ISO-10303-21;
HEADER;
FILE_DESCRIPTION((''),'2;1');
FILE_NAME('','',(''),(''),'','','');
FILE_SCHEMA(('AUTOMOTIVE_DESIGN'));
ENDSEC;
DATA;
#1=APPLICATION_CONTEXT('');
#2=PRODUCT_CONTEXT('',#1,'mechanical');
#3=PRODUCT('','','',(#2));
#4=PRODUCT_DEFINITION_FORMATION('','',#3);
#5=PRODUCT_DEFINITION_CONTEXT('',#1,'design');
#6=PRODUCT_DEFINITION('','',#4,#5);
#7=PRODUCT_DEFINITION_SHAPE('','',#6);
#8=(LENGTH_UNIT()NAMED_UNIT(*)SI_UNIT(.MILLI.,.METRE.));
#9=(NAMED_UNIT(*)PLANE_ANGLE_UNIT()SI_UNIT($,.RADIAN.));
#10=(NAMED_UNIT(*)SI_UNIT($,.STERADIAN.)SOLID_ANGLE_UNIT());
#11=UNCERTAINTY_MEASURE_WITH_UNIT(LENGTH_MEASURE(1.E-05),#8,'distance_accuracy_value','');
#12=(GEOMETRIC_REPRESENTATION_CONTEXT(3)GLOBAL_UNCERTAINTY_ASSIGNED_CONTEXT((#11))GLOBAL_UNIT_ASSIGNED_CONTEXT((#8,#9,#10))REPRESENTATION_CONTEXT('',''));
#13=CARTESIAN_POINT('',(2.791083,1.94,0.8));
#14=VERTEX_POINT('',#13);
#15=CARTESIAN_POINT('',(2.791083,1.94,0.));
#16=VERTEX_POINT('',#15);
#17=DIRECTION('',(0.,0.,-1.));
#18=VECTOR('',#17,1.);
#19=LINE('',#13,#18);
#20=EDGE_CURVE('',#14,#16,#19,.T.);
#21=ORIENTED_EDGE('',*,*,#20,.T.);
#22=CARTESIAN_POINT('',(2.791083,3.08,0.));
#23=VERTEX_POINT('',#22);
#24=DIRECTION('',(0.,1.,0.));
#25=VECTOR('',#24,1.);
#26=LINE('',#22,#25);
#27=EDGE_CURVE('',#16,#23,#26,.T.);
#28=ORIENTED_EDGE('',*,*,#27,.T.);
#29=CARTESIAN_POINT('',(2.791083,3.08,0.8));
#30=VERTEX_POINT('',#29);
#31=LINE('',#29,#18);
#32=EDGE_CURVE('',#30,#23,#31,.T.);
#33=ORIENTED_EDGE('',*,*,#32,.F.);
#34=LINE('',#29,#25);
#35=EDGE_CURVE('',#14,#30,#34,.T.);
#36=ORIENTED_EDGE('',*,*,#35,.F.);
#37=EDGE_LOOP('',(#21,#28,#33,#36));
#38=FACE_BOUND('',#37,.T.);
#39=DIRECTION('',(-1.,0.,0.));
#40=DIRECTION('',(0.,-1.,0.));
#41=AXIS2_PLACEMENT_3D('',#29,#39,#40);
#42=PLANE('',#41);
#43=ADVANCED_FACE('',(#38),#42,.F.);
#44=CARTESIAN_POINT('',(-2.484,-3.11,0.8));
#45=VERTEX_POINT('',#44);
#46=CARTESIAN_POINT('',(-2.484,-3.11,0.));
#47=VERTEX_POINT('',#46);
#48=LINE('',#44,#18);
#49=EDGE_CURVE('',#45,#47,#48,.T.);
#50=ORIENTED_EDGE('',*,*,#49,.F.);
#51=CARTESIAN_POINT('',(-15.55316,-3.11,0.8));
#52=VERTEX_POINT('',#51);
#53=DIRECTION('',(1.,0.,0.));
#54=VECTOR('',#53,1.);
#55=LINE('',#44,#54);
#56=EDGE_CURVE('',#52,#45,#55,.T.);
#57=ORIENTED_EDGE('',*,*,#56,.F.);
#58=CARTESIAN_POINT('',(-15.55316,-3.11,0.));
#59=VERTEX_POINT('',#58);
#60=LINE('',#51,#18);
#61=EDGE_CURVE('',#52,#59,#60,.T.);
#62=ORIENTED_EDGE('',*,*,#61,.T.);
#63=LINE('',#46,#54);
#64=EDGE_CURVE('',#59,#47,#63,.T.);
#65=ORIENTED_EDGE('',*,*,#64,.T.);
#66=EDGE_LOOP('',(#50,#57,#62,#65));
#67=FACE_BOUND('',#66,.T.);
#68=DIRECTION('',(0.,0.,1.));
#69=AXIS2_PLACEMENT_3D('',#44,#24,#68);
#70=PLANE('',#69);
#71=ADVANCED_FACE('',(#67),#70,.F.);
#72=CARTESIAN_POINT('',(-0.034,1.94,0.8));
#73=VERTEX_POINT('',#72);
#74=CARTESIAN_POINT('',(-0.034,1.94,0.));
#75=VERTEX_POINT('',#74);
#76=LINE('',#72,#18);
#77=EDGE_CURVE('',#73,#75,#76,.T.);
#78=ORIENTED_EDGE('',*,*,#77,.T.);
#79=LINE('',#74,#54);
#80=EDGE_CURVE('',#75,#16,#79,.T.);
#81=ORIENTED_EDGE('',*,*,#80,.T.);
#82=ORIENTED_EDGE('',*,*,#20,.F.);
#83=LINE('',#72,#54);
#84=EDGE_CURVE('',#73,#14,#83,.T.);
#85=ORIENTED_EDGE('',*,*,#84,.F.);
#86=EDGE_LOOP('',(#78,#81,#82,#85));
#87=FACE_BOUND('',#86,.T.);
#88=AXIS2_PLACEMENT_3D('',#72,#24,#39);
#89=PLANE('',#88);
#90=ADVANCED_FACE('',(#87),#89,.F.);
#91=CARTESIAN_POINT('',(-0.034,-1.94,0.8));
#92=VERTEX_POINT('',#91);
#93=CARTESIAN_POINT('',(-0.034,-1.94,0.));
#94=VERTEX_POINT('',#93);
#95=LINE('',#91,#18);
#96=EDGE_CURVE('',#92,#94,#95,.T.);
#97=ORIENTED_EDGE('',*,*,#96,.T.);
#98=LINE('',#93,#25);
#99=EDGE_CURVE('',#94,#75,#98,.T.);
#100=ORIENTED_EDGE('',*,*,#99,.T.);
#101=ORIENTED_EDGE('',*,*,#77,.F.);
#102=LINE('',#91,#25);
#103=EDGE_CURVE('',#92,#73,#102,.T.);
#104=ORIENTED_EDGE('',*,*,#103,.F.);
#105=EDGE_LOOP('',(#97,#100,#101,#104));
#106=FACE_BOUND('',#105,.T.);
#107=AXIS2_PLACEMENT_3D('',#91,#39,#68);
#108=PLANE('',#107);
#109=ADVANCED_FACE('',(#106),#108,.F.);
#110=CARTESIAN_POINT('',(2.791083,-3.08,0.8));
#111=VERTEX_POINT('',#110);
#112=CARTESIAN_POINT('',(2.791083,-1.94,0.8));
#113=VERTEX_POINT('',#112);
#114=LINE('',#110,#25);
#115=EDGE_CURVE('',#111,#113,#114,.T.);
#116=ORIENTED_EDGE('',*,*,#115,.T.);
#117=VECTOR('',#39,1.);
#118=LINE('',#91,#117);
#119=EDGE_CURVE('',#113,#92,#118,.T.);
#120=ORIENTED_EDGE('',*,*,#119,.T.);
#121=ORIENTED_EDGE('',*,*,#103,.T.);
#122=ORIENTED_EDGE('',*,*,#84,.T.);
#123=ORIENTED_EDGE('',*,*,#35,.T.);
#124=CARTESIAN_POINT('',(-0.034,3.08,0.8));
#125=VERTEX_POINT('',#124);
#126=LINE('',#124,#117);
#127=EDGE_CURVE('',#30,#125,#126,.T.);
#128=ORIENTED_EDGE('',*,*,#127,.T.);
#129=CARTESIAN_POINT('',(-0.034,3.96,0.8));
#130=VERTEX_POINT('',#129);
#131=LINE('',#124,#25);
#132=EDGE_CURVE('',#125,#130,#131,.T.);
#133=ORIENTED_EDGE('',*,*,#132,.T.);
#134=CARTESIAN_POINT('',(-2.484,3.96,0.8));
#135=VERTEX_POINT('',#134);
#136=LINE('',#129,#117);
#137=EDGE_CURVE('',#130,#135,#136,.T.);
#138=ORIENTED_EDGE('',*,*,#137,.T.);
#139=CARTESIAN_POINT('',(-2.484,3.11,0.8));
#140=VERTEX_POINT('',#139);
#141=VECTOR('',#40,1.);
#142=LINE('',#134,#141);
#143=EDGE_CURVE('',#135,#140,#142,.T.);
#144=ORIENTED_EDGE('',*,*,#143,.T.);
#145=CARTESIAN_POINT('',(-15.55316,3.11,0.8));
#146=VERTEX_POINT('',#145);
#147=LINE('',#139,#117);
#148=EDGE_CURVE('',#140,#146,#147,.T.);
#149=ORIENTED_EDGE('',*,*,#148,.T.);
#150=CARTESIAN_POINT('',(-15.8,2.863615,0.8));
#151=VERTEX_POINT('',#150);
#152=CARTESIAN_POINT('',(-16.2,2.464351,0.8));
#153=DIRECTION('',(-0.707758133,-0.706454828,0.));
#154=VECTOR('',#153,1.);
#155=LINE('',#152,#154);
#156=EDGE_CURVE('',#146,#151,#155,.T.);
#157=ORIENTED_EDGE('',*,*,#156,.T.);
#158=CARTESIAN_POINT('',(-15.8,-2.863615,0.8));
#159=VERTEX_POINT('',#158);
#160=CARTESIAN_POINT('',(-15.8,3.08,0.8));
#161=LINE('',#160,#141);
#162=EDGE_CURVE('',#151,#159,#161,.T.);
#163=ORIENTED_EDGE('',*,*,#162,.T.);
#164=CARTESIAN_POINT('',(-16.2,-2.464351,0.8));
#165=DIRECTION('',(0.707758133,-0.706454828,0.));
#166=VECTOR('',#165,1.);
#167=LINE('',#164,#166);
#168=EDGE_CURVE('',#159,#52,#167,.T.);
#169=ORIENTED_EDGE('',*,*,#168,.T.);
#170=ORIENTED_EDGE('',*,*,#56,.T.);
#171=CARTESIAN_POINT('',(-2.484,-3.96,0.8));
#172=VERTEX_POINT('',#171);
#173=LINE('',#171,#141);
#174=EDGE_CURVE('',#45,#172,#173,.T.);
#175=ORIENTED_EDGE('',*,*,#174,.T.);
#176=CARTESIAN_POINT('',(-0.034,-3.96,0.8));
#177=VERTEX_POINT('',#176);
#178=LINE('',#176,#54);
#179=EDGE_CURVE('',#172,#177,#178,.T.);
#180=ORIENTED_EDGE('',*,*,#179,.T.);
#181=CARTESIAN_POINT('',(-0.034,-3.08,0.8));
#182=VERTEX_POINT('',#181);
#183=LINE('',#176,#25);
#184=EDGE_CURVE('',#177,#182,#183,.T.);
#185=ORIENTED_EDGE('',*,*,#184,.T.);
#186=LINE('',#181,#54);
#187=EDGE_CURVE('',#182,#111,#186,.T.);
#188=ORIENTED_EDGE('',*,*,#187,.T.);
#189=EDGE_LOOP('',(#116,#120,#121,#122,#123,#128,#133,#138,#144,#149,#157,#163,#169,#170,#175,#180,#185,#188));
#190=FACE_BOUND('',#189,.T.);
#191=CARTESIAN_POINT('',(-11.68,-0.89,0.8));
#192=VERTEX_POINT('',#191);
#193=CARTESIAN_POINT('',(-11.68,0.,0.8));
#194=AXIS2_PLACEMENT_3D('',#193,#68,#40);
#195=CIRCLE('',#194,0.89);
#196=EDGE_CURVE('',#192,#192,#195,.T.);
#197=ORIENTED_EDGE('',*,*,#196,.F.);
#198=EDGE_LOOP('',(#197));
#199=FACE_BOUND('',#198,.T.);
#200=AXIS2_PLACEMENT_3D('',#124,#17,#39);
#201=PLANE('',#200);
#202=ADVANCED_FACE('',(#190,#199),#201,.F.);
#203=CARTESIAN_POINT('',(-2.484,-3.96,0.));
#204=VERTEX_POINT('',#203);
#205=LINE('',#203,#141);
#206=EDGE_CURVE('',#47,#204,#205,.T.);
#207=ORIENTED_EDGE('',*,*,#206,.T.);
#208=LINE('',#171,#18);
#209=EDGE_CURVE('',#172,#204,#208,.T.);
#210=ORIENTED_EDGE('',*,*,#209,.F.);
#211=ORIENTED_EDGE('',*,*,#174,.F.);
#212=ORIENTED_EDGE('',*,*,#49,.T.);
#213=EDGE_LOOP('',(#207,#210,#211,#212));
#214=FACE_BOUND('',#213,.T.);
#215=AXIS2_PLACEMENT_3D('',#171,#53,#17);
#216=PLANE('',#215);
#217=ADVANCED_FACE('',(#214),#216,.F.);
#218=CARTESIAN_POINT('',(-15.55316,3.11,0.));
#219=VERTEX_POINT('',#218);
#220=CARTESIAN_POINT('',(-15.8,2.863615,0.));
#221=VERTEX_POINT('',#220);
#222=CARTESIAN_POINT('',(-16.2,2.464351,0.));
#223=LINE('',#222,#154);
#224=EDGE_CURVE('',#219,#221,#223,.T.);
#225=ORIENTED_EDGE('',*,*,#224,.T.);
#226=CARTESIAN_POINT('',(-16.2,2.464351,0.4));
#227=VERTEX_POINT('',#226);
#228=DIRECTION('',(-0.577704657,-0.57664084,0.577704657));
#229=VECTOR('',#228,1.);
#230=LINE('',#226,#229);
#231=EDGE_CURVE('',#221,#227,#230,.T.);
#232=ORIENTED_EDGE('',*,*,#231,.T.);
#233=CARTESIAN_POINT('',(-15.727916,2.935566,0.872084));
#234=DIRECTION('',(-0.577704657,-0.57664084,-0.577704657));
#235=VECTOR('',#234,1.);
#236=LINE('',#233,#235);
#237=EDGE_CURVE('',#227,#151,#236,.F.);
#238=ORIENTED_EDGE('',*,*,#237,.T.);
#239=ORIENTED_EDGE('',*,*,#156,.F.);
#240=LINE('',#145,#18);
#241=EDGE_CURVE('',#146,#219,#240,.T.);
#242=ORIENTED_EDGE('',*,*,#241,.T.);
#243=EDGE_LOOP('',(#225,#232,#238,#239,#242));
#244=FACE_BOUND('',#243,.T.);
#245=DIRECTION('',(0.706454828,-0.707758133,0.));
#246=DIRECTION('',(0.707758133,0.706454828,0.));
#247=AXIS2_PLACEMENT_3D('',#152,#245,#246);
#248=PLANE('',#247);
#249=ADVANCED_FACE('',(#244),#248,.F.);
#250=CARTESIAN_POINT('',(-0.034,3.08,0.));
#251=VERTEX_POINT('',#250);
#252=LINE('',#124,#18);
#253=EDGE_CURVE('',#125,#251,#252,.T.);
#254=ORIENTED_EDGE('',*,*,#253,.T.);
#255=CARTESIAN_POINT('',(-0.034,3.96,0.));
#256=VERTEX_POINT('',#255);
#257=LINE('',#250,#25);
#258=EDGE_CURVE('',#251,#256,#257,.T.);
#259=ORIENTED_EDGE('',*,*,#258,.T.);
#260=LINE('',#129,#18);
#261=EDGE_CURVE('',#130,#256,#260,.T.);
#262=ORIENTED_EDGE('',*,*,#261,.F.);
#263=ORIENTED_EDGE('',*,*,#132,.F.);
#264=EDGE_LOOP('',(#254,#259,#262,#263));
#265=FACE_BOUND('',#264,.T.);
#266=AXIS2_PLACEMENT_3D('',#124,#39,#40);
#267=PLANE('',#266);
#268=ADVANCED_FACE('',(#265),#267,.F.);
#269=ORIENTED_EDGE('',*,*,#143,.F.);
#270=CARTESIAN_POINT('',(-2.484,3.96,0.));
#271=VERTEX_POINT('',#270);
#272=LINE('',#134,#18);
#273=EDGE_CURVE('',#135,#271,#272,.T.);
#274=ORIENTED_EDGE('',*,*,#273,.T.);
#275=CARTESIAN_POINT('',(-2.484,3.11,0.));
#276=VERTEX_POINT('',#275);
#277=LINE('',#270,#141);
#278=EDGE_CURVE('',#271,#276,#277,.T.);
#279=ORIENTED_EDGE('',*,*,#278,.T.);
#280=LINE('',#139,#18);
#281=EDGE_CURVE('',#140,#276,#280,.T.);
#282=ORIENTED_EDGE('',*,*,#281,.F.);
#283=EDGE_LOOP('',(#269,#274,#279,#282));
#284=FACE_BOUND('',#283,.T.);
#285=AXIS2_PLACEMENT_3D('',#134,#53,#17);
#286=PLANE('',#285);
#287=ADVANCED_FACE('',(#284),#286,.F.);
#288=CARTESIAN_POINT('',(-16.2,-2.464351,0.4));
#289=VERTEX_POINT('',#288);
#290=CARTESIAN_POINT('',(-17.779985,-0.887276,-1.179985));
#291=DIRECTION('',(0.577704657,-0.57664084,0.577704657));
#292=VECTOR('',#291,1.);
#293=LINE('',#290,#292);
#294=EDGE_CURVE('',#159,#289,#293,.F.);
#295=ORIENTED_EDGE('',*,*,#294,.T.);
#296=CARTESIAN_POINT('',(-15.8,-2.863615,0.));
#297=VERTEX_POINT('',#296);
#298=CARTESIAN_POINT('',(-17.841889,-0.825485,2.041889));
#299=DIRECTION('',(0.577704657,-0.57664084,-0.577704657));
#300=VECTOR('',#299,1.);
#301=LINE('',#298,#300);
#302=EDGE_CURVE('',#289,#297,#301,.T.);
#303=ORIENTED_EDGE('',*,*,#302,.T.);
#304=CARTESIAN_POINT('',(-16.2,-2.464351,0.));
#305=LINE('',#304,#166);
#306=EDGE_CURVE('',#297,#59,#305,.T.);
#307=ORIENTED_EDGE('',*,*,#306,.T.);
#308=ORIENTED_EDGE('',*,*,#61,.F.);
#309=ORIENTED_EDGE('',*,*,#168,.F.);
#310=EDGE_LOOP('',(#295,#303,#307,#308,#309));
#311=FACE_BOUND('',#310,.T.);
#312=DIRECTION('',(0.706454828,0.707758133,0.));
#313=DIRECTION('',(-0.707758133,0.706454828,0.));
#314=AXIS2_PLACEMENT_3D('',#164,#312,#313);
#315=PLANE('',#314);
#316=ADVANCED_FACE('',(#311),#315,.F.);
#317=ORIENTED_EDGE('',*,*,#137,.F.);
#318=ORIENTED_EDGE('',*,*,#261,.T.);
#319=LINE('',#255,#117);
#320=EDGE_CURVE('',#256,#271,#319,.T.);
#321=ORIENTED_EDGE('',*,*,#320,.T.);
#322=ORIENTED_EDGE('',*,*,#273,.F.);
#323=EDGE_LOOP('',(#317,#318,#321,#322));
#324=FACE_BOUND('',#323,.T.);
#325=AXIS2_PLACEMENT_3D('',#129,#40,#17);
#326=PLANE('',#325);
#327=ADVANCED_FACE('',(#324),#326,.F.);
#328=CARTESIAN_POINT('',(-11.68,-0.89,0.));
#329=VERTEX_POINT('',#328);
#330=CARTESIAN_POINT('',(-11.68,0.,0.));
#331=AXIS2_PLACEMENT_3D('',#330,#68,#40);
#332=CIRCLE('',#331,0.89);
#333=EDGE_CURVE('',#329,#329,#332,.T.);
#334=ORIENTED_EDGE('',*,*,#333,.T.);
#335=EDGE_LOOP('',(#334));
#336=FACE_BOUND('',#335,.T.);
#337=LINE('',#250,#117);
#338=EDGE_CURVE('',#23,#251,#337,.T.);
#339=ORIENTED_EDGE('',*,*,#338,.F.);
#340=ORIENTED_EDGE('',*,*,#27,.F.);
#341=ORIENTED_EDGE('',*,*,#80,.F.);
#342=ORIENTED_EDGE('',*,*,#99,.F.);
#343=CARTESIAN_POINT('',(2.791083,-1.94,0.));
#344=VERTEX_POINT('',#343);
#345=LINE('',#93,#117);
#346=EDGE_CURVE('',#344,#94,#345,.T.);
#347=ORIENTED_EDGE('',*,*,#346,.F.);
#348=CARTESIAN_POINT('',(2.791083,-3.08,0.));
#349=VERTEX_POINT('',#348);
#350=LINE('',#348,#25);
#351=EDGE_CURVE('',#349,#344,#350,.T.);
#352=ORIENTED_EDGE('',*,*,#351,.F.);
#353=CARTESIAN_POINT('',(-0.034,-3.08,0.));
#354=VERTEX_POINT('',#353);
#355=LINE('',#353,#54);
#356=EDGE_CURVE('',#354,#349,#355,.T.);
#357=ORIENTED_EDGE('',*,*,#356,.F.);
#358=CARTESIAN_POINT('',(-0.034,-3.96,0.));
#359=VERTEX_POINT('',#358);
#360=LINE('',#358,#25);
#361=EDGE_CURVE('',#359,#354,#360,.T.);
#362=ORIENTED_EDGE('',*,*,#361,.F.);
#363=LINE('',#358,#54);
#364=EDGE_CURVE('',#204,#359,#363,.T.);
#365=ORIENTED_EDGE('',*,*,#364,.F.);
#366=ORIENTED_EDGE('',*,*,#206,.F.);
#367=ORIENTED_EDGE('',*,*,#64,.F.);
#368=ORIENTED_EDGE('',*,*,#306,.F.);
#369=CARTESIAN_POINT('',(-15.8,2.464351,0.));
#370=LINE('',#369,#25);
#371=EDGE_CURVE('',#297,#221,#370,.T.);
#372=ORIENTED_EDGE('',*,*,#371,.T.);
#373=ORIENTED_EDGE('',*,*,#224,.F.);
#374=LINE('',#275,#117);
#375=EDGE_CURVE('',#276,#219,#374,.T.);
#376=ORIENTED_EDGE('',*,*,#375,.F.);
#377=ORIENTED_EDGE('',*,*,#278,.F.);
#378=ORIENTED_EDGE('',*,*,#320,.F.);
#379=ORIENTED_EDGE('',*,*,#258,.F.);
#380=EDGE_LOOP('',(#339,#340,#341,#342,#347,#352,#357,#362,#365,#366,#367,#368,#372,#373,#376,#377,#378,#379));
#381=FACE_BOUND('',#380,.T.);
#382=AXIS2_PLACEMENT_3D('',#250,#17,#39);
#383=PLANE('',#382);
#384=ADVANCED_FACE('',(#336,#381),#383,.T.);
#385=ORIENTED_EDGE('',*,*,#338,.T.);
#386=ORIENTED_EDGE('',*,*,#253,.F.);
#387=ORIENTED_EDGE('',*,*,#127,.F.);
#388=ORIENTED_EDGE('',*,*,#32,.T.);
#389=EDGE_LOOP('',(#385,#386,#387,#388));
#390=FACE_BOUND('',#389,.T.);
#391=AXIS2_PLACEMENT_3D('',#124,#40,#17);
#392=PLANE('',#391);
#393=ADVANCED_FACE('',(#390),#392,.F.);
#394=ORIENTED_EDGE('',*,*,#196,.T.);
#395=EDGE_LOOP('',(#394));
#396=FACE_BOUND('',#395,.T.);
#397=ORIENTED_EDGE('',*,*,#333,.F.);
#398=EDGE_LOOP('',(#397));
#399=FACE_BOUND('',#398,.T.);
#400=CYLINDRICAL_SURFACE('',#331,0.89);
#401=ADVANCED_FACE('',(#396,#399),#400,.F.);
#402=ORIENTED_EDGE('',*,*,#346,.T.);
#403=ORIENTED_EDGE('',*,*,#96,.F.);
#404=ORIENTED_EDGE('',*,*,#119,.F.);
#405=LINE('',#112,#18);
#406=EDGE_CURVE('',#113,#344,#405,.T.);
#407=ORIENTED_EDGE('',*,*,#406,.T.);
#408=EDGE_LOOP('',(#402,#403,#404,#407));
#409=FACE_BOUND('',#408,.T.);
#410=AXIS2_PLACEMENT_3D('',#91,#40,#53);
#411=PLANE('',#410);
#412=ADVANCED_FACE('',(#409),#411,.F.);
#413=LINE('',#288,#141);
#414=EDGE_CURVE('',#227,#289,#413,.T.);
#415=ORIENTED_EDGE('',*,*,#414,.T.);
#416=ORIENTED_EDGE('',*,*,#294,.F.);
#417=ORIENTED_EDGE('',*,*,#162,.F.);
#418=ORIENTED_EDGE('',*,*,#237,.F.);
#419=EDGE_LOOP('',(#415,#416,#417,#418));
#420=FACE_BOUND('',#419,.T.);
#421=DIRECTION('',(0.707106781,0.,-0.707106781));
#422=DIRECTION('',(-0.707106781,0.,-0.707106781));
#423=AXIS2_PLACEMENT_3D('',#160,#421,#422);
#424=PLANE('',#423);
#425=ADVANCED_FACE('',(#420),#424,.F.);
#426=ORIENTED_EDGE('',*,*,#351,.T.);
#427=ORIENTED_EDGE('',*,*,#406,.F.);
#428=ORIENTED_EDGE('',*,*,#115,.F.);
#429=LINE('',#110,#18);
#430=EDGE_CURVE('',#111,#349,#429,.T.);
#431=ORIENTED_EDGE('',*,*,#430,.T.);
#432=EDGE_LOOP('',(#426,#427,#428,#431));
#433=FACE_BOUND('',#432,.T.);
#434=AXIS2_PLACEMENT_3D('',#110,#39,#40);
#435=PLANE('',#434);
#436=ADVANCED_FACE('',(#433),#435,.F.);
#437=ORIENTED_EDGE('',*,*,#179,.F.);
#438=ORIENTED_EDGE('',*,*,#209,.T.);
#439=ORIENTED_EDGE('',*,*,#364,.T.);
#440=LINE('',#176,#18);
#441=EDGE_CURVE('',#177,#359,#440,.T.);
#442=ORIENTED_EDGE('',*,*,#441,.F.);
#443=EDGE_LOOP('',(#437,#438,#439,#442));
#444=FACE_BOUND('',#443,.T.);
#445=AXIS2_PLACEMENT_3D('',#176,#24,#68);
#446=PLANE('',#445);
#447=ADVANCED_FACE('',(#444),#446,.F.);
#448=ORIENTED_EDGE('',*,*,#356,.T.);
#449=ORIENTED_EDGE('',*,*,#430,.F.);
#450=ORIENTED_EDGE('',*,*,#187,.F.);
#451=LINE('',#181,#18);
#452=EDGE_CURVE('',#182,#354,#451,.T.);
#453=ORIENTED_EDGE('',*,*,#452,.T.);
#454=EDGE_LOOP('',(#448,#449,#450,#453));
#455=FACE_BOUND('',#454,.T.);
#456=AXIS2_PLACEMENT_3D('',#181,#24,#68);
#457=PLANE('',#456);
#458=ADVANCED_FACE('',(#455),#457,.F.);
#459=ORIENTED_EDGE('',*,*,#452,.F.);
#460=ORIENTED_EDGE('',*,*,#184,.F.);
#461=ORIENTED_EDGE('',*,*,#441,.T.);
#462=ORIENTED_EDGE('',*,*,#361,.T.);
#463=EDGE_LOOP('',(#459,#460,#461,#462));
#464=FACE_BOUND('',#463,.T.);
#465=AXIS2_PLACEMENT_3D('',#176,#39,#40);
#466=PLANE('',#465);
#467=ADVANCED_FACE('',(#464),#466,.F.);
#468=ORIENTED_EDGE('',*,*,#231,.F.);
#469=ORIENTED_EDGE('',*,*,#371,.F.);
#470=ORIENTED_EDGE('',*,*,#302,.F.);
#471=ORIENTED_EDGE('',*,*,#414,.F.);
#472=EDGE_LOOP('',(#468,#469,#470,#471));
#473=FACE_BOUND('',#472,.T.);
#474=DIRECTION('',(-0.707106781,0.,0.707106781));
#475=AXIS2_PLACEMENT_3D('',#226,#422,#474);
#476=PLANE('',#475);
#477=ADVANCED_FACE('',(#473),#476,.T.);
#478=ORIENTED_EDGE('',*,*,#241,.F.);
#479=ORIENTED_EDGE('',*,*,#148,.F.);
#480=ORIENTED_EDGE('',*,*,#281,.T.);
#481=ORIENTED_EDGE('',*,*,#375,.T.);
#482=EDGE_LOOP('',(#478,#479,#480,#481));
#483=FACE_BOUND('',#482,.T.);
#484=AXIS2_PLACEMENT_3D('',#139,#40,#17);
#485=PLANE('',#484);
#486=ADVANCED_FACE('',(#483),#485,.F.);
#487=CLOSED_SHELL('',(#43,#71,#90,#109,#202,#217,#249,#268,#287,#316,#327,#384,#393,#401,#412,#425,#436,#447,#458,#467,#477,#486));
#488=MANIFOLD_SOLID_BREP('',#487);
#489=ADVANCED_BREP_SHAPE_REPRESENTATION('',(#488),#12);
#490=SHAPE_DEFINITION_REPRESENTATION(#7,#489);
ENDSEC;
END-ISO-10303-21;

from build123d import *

# Parameters (mm, degrees)
EXTRUSION1_DEPTH        = 0.8
ESQUISSE2_R             = 0.89
ENL_V_MAT_EXTRU_1_DEPTH = 0.8
CHANFREIN1_SIZE         = 0.4
CHANFREIN2_SIZE         = 0.4


with BuildPart() as part:
    # Esquisse1 → Extrusion1 (new body)
    with BuildSketch(Plane(origin=(0, 0, 0), x_dir=(0, 1, 0), z_dir=(0, 0, 1))):
        Polygon((-3.96, 0.034), (-3.08, 0.034), (-3.08, -2.791082591), (-1.94, -2.791082591), (-1.94, 0.034), (1.94, 0.034), (1.94, -2.791082591), (3.08, -2.791082591), (3.08, 0.034), (3.96, 0.034), (3.96, 2.484), (3.11, 2.484), (3.11, 15.553159959), (2.464351087, 16.2), (-2.464351087, 16.2), (-3.11, 15.553159959), (-3.11, 2.484), (-3.96, 2.484), align=None)
    extrude(amount=EXTRUSION1_DEPTH)

    # Esquisse2 → Enlèv. mat.-Extru.1 (cut)
    with BuildSketch(Plane(origin=(0, 0, 0.8), x_dir=(0, 1, 0), z_dir=(0, 0, 1))):
        with Locations(Location((0, 11.68, 0), (0, 0, 180))):
            Circle(ESQUISSE2_R)
    extrude(amount=-ENL_V_MAT_EXTRU_1_DEPTH, mode=Mode.SUBTRACT)

    # Chanfrein1
    chanfrein1_edges = [part.edges().sort_by_distance(p)[0] for p in [
        (-16.2, 0, 0),
    ]]
    chamfer(chanfrein1_edges, length=CHANFREIN1_SIZE)

    # Chanfrein2
    chanfrein2_edges = [part.edges().sort_by_distance(p)[0] for p in [
        (-16.2, 0, 0.8),
    ]]
    chamfer(chanfrein2_edges, length=CHANFREIN2_SIZE - 0.0001)  # a hair under: the kernel refuses the full size


solid = part.part
